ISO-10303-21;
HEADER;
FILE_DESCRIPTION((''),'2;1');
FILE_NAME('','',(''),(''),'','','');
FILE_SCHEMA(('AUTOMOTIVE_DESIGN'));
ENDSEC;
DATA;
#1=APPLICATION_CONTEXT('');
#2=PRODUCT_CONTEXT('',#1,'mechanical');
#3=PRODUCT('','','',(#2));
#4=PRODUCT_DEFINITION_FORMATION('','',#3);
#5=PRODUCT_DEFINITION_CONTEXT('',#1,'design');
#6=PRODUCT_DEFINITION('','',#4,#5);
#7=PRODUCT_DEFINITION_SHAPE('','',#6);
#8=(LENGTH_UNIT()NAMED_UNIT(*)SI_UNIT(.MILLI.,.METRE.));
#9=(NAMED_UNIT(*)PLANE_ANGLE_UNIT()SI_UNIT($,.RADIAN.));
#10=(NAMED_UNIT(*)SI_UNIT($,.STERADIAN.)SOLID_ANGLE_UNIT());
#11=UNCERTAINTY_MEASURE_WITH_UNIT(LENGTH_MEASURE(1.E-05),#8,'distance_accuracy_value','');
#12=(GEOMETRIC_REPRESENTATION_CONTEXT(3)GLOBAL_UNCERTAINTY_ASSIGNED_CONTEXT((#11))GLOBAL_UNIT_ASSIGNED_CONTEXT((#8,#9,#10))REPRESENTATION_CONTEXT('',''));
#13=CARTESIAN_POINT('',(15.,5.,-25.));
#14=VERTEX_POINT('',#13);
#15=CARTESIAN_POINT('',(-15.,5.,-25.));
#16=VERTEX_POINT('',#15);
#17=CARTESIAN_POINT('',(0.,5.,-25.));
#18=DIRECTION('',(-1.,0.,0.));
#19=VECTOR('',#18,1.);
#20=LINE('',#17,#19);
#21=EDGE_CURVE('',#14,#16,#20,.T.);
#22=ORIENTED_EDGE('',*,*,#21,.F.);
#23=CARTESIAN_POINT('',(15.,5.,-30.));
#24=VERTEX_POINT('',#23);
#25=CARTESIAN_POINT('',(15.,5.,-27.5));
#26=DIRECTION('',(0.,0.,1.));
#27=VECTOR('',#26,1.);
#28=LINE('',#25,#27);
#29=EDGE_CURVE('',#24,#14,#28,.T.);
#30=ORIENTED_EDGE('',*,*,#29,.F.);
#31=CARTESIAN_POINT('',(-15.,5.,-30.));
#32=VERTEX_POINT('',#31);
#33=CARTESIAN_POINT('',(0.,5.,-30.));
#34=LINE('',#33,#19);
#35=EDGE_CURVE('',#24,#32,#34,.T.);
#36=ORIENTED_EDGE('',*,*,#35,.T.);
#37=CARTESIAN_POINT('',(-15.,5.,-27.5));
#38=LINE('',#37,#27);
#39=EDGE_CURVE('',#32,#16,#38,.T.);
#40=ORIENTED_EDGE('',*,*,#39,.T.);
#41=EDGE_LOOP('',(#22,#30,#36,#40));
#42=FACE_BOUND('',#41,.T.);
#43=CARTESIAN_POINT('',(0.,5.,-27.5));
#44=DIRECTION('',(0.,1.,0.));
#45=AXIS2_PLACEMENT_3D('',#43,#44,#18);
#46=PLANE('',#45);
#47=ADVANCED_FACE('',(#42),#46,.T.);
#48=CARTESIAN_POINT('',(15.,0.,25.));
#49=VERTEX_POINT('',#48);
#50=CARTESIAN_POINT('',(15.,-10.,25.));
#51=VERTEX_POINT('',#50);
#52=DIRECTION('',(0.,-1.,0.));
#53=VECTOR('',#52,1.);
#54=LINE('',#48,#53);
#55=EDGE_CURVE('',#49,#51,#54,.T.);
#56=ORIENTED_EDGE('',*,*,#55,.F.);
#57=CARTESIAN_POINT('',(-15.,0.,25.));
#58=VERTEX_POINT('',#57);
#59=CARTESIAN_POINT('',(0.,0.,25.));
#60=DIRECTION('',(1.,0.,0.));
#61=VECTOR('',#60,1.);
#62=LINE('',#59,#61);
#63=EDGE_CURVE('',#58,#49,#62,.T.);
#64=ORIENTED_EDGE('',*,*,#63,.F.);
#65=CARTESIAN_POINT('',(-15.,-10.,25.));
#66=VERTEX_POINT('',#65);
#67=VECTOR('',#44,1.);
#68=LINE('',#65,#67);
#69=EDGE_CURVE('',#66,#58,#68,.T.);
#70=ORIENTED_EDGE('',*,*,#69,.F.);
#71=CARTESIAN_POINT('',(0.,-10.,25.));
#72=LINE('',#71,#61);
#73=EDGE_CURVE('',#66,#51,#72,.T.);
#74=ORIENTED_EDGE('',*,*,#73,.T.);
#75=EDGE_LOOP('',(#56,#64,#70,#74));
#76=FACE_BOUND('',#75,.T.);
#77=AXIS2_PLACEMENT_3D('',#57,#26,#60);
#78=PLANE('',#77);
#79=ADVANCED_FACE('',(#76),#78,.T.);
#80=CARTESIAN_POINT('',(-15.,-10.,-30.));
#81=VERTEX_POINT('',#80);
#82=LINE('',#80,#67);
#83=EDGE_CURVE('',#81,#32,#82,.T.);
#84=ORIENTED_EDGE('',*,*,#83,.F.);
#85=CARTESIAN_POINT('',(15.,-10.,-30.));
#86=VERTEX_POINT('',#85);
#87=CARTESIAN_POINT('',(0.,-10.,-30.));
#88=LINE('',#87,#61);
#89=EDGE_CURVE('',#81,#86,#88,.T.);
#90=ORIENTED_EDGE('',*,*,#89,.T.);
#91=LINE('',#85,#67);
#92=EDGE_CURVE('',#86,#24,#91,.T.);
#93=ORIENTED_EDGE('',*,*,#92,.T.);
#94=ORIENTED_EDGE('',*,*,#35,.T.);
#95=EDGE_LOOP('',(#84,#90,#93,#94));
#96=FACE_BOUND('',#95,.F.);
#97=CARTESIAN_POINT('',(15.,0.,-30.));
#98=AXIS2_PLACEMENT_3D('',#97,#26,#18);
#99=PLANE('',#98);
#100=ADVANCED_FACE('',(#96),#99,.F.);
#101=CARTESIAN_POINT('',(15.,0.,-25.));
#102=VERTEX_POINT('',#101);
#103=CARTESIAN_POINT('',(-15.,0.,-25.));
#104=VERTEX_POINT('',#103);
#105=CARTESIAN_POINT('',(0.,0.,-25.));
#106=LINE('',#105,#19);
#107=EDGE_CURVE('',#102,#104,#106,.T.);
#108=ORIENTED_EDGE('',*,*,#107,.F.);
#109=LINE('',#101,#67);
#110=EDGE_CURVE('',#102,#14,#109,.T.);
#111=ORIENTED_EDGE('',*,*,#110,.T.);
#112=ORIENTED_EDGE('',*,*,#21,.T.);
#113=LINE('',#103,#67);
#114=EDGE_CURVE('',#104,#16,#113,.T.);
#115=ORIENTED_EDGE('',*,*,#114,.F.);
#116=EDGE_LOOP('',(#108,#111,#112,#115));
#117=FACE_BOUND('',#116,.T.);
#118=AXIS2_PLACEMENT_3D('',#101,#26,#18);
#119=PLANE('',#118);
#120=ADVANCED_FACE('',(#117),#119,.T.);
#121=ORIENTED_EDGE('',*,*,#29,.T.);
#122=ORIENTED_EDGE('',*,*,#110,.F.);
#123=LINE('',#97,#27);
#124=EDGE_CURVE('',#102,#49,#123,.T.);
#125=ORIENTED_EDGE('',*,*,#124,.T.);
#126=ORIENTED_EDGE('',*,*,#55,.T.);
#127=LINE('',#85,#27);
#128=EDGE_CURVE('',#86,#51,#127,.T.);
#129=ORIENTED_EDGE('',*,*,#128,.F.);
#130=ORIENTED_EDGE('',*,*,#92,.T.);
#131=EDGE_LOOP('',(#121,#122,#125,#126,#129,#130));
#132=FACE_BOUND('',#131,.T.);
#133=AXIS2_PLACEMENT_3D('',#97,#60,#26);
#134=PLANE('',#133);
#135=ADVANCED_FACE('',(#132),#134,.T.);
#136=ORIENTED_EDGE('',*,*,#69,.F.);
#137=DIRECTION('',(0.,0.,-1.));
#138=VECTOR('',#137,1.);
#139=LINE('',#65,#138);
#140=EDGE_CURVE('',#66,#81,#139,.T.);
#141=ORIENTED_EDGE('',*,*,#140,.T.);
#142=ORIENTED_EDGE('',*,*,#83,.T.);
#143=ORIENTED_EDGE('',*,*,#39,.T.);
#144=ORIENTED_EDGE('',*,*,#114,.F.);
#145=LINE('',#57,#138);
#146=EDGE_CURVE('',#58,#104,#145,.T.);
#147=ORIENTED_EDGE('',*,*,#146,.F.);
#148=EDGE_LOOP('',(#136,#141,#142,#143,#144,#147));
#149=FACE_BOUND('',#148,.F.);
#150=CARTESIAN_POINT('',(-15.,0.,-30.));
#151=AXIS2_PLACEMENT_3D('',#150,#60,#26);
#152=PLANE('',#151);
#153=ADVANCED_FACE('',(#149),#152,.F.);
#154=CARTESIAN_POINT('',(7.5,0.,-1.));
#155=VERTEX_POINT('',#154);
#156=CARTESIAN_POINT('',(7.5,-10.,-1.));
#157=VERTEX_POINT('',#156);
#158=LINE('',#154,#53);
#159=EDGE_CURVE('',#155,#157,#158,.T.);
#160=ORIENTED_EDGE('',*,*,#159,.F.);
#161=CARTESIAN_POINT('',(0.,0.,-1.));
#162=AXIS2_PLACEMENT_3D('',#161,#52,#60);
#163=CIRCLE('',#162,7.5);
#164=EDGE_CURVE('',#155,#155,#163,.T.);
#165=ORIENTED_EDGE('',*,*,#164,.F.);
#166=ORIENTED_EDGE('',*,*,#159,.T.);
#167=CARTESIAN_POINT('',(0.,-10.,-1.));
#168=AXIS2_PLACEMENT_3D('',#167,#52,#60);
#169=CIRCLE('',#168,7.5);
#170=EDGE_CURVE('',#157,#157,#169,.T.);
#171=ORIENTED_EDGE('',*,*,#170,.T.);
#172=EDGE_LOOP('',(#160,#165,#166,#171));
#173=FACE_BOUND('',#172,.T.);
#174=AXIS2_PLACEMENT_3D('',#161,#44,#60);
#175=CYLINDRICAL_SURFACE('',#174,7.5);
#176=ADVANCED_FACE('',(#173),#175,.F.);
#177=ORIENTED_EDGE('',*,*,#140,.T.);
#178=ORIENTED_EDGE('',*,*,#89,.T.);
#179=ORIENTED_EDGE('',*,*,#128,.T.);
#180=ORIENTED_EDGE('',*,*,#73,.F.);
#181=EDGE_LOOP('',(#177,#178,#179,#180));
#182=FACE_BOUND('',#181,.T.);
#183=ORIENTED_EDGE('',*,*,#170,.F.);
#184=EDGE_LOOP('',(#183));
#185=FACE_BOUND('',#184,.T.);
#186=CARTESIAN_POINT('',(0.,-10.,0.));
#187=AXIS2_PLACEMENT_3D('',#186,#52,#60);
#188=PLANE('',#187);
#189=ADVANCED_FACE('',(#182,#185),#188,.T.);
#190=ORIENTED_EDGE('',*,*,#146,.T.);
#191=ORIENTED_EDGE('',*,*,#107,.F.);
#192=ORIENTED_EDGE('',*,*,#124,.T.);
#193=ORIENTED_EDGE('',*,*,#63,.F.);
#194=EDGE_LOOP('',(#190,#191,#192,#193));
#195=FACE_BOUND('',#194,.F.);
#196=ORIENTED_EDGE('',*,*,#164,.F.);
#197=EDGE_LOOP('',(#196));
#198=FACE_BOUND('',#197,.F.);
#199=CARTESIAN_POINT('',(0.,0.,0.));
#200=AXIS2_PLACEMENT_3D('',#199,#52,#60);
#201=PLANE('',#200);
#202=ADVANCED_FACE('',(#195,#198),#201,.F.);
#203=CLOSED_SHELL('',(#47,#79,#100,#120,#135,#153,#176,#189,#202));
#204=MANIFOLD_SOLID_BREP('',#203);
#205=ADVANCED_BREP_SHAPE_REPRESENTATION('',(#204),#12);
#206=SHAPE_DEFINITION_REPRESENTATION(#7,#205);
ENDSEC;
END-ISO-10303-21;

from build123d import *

# Parameters (mm, degrees)
F0_W       = 30
F0_H       = 50
F0_R       = 7.5
F0_H_2     = 5
F1_DEPTH   = 10
F2_W       = 30
F2_H       = 5
F1_FACE1_W = 30
F1_FACE1_H = 55
F1_FACE1_R = 7.5
F3_DEPTH   = 5


# Not quite as in the source:
# - a feature names something its author has since deleted; it is built from what else it names


with BuildPart() as f1:
    # F0 (on Front) → F1 (new body)
    with BuildSketch(Plane.XZ):
        Rectangle(F0_W, F0_H)
        with Locations((0, -1)):
            Circle(F0_R, mode=Mode.SUBTRACT)
        with Locations((0, -27.5)):
            Rectangle(F0_W, F0_H_2)
    extrude(amount=F1_DEPTH)

    # F2 (on face) + F1_face1 (on face) → F3 (join)
    with BuildSketch(Plane(origin=(0, 0, 0), x_dir=(-1, 0, 0), z_dir=(0, 1, 0))):
        with Locations((0, -27.5)):
            Rectangle(F2_W, F2_H)
    with BuildSketch(Plane(origin=(0, -10, -2.6799188927), x_dir=(1, 0, 0), z_dir=(0, -1, 0))):
        with Locations((0, 0.1799188927)):
            Rectangle(F1_FACE1_W, F1_FACE1_H)
        with Locations((0, 1.6799188927)):
            Circle(F1_FACE1_R, mode=Mode.SUBTRACT)
    extrude(amount=F3_DEPTH, dir=(0, 1, 0))


solid = f1.part
